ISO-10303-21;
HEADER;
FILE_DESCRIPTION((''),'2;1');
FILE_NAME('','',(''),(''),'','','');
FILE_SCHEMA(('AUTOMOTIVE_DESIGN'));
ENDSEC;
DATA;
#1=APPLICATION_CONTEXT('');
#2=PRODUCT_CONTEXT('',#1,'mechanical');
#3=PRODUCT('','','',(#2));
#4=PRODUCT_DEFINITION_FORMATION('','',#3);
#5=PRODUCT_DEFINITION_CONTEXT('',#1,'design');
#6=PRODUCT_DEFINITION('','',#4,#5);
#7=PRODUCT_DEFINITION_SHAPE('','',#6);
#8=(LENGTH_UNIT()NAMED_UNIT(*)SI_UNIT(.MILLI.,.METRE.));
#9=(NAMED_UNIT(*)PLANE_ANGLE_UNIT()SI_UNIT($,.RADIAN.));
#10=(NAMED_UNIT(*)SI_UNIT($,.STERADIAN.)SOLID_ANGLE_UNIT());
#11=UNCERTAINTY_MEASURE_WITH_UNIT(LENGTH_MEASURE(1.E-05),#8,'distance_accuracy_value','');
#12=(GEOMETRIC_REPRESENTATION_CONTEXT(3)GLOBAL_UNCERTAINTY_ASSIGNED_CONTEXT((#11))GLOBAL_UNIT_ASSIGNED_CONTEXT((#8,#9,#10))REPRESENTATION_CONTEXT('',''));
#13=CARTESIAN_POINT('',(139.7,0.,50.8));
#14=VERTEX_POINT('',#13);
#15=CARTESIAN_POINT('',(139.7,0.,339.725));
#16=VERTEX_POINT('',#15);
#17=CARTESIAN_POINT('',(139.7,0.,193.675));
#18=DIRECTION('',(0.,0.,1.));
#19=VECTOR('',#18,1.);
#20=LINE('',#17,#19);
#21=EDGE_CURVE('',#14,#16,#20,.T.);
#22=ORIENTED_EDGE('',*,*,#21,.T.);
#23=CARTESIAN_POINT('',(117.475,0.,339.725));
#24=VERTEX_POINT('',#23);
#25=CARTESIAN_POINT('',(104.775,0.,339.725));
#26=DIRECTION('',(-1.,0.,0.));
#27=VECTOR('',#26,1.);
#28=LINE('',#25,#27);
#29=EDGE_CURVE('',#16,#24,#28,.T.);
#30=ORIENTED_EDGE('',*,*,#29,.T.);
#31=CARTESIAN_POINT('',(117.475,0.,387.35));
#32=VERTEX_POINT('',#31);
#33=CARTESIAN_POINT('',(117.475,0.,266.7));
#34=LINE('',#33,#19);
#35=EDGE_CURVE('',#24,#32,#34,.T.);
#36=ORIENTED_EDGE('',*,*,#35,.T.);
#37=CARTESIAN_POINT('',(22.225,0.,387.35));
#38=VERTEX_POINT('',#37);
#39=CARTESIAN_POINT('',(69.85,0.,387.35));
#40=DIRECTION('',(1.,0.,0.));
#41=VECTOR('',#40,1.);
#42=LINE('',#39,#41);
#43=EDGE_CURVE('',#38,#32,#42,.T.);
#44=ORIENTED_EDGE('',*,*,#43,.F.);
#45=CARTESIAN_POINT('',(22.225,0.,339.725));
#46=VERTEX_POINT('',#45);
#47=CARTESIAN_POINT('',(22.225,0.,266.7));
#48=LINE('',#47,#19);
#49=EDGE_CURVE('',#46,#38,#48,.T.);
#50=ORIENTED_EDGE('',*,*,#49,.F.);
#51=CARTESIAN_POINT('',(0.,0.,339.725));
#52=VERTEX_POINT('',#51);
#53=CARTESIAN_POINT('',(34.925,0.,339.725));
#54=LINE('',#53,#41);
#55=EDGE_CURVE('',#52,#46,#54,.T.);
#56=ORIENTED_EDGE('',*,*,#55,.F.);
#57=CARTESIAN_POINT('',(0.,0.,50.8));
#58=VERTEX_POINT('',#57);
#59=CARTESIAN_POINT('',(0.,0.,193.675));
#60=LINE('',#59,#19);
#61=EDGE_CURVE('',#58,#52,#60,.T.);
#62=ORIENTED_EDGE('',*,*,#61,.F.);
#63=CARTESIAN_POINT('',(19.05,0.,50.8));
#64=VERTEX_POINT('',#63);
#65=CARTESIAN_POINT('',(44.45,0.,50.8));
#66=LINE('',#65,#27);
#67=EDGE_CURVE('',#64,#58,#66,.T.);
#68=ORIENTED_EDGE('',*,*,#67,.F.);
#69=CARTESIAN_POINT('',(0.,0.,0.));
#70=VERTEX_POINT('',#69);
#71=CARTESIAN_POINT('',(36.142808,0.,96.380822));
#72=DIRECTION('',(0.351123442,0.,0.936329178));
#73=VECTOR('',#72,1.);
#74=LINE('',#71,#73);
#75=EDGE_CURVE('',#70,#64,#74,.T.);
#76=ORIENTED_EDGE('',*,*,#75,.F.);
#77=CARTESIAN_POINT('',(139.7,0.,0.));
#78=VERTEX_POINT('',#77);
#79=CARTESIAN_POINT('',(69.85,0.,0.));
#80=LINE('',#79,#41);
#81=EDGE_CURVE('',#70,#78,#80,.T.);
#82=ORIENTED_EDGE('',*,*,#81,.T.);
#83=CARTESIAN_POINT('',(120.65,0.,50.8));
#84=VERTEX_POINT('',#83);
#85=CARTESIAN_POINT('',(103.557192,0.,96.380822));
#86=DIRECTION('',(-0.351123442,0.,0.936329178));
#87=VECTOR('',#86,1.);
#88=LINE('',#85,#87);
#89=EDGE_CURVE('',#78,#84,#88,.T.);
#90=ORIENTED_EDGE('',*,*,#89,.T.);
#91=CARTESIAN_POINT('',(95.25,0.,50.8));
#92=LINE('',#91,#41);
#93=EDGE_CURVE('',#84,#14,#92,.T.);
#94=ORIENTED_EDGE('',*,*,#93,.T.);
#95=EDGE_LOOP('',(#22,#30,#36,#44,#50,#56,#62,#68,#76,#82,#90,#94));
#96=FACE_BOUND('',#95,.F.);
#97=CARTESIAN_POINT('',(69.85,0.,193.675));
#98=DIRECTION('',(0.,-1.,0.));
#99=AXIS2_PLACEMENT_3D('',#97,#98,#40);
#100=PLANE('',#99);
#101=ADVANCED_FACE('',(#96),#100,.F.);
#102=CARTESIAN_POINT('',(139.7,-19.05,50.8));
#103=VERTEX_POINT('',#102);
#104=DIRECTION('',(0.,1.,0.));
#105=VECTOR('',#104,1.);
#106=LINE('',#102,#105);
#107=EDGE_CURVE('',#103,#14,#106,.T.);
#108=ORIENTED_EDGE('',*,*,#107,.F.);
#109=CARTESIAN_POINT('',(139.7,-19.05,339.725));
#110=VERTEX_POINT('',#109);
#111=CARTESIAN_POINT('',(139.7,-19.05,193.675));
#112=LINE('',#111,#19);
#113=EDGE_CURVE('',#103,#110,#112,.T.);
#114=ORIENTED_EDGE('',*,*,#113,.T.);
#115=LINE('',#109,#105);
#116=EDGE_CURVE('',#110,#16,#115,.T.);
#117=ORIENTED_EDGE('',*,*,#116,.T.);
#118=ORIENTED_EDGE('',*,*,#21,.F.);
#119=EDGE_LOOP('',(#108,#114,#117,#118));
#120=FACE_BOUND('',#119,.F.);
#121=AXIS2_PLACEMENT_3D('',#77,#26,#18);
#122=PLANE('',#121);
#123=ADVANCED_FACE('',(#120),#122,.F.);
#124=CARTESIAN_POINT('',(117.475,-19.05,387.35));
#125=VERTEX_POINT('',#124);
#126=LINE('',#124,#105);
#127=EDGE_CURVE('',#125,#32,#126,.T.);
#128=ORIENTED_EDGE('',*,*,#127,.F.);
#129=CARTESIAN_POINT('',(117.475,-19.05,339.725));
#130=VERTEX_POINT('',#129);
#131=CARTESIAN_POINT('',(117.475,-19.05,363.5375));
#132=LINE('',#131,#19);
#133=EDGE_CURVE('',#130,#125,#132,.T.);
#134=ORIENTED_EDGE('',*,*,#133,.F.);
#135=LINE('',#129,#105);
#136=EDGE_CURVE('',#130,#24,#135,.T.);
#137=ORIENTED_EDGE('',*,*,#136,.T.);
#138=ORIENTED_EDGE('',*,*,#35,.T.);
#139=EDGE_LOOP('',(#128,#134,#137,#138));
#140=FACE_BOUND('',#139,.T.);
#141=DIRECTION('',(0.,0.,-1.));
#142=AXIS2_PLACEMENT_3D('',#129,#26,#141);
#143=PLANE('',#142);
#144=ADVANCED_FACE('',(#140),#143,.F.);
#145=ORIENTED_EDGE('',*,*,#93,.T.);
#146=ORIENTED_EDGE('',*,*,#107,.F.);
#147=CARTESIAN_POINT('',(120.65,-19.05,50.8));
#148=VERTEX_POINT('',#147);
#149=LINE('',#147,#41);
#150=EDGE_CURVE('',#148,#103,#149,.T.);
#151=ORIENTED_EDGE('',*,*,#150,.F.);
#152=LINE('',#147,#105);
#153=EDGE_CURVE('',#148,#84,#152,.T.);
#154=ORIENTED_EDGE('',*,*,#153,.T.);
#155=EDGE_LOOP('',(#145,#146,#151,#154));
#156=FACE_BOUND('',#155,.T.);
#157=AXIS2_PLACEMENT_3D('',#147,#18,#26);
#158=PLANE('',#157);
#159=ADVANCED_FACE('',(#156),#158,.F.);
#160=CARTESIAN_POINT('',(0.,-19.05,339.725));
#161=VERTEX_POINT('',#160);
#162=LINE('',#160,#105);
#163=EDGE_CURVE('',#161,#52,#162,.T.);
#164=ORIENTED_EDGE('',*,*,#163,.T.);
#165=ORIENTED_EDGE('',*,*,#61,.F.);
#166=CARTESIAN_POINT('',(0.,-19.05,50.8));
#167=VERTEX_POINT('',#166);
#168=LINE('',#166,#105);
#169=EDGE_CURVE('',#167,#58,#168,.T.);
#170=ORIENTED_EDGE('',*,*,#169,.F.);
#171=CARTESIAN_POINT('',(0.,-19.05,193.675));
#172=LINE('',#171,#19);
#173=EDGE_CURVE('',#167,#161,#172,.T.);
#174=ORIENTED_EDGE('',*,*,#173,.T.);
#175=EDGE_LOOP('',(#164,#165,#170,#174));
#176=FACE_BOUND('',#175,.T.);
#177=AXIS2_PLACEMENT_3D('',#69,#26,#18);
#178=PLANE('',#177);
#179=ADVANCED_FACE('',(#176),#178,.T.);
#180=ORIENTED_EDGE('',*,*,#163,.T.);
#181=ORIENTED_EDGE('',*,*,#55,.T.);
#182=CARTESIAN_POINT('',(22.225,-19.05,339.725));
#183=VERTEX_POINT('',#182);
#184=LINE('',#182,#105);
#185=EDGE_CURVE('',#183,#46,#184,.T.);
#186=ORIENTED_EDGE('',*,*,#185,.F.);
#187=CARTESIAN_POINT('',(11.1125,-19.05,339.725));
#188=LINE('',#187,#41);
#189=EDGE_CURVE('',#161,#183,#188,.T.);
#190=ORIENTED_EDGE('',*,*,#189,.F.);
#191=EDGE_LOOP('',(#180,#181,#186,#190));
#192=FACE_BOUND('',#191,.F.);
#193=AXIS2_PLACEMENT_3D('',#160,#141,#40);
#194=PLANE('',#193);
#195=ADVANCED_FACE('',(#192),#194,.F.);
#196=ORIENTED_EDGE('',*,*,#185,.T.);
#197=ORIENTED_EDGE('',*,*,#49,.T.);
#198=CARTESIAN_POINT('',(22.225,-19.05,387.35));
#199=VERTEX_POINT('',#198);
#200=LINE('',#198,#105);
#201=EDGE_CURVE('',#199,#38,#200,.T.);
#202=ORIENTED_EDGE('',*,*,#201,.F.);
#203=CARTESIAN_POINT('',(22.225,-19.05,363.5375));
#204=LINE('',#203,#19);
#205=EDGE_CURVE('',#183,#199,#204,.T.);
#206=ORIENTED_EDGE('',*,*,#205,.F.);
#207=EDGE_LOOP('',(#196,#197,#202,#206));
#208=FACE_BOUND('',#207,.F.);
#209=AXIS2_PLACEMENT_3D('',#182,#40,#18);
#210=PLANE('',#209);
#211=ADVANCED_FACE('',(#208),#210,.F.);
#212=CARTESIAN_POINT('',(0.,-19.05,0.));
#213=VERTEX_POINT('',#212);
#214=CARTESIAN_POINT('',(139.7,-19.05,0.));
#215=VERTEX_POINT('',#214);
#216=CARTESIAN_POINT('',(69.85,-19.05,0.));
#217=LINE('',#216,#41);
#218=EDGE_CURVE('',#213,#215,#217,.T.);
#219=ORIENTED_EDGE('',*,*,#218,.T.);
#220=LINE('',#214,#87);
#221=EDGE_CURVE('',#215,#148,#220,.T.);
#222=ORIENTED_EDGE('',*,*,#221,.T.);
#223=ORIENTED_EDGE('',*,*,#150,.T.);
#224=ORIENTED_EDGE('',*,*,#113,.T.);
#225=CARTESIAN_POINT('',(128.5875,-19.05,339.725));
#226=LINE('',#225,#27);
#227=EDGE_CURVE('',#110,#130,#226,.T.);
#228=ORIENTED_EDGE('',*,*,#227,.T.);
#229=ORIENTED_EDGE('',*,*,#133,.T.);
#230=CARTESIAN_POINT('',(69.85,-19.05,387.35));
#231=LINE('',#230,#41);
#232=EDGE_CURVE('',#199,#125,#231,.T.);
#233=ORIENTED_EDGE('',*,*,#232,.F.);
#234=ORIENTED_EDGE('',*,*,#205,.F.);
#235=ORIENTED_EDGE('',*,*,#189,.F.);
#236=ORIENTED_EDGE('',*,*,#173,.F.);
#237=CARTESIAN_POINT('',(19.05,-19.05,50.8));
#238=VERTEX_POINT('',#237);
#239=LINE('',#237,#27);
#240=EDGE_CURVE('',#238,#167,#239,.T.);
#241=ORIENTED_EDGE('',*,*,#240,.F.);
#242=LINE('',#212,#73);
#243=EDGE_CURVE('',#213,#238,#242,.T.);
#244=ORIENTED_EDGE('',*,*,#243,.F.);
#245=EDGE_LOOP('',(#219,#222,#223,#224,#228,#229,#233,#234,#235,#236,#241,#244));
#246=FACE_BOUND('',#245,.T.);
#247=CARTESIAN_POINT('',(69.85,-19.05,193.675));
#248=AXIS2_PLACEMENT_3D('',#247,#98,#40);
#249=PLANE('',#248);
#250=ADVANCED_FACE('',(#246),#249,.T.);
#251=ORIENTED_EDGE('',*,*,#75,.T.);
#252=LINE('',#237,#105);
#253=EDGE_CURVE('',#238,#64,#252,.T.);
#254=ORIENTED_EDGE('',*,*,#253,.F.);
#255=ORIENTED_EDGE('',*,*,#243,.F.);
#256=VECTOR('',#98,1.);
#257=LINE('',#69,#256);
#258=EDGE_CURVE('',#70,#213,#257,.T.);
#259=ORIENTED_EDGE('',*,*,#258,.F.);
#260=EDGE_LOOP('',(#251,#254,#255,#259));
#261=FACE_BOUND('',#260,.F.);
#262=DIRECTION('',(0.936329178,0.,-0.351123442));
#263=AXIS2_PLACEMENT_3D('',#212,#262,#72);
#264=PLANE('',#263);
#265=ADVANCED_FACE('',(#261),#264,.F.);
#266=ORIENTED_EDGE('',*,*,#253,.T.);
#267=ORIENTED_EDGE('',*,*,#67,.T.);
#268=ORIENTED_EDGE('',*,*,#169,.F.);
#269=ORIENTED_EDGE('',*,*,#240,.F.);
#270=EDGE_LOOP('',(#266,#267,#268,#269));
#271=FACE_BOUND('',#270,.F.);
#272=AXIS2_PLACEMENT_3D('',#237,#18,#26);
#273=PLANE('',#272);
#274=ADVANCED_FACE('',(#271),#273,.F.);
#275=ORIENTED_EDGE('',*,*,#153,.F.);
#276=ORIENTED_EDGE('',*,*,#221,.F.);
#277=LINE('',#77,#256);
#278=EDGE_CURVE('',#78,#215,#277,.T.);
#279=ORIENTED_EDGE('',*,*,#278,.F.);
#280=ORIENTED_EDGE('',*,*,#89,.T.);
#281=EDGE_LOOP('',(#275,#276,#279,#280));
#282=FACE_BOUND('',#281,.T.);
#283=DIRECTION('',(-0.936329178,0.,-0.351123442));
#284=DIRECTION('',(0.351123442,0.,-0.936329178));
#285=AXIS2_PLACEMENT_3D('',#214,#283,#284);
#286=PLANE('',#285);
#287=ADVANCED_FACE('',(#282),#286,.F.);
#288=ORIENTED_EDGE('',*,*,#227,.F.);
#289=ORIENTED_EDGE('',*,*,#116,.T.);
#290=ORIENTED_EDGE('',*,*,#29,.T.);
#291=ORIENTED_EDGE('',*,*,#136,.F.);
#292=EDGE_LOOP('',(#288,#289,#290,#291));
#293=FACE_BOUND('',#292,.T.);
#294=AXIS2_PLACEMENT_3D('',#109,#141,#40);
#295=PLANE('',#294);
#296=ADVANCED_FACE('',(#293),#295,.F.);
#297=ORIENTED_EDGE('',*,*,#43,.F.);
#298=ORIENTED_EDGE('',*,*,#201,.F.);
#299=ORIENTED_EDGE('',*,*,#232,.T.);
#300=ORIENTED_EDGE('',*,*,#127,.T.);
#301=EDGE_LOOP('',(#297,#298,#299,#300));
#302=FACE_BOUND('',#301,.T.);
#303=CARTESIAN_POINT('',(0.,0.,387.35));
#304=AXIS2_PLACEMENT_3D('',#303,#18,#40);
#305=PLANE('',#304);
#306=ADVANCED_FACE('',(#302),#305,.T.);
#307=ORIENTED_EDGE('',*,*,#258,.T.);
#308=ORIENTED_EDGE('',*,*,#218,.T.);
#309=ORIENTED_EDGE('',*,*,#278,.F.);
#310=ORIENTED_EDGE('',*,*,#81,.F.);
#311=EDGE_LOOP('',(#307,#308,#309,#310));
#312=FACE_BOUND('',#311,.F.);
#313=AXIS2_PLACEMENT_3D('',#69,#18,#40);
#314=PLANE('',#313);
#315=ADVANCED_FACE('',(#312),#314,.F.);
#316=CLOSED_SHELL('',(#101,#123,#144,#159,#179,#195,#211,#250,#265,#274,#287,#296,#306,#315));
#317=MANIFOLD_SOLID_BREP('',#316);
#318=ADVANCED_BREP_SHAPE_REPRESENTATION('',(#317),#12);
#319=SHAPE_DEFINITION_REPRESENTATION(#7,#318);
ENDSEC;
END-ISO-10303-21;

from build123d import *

# Parameters (mm, degrees)
F0_W     = 139.7
F0_H     = 387.35
F1_DEPTH = 19.05
F2_W     = 22.225
F2_H     = 47.625
F3_DEPTH = 19.051
F6_DEPTH = 19.051


# Not quite as in the source:
# - a length typed as a fraction of an inch, garbled in the dataset ("3 / 203.2 mm" for 3/8 in), is restored
# - a pattern or mirror of a feature is missing from the dataset's text; its kind, count and spacing are read off the source's solid


with BuildPart() as f1:
    # F0 (on Front) → F1 (new body)
    with BuildSketch(Plane.XZ):
        with Locations((69.85, 193.675)):
            Rectangle(F0_W, F0_H)
    extrude(amount=F1_DEPTH)

    # F2 (on face) → F3 (cut, through all)
    with BuildSketch(Plane.XZ.offset(19.05)):
        with Locations((11.1125, 363.5375)):
            Rectangle(F2_W, F2_H)
    f3 = extrude(amount=-F3_DEPTH, mode=Mode.SUBTRACT)

    # F3_copies: F3 across plane
    add(f3.mirror(Plane(origin=(69.85, 0, 0), x_dir=(0, 0, 1), z_dir=(1, 0, 0))), mode=Mode.SUBTRACT)

    # F5 (on face) → F6 (cut, through all)
    with BuildSketch(Plane.XZ.offset(19.05)):
        Polygon((0, 50.8), (0, 0), (19.05, 50.8), align=None)
    f6 = extrude(amount=-F6_DEPTH, mode=Mode.SUBTRACT)

    # F6_copies: F6 across plane
    add(f6.mirror(Plane(origin=(69.85, 0, 0), x_dir=(0, 0, 1), z_dir=(1, 0, 0))), mode=Mode.SUBTRACT)


solid = f1.part
